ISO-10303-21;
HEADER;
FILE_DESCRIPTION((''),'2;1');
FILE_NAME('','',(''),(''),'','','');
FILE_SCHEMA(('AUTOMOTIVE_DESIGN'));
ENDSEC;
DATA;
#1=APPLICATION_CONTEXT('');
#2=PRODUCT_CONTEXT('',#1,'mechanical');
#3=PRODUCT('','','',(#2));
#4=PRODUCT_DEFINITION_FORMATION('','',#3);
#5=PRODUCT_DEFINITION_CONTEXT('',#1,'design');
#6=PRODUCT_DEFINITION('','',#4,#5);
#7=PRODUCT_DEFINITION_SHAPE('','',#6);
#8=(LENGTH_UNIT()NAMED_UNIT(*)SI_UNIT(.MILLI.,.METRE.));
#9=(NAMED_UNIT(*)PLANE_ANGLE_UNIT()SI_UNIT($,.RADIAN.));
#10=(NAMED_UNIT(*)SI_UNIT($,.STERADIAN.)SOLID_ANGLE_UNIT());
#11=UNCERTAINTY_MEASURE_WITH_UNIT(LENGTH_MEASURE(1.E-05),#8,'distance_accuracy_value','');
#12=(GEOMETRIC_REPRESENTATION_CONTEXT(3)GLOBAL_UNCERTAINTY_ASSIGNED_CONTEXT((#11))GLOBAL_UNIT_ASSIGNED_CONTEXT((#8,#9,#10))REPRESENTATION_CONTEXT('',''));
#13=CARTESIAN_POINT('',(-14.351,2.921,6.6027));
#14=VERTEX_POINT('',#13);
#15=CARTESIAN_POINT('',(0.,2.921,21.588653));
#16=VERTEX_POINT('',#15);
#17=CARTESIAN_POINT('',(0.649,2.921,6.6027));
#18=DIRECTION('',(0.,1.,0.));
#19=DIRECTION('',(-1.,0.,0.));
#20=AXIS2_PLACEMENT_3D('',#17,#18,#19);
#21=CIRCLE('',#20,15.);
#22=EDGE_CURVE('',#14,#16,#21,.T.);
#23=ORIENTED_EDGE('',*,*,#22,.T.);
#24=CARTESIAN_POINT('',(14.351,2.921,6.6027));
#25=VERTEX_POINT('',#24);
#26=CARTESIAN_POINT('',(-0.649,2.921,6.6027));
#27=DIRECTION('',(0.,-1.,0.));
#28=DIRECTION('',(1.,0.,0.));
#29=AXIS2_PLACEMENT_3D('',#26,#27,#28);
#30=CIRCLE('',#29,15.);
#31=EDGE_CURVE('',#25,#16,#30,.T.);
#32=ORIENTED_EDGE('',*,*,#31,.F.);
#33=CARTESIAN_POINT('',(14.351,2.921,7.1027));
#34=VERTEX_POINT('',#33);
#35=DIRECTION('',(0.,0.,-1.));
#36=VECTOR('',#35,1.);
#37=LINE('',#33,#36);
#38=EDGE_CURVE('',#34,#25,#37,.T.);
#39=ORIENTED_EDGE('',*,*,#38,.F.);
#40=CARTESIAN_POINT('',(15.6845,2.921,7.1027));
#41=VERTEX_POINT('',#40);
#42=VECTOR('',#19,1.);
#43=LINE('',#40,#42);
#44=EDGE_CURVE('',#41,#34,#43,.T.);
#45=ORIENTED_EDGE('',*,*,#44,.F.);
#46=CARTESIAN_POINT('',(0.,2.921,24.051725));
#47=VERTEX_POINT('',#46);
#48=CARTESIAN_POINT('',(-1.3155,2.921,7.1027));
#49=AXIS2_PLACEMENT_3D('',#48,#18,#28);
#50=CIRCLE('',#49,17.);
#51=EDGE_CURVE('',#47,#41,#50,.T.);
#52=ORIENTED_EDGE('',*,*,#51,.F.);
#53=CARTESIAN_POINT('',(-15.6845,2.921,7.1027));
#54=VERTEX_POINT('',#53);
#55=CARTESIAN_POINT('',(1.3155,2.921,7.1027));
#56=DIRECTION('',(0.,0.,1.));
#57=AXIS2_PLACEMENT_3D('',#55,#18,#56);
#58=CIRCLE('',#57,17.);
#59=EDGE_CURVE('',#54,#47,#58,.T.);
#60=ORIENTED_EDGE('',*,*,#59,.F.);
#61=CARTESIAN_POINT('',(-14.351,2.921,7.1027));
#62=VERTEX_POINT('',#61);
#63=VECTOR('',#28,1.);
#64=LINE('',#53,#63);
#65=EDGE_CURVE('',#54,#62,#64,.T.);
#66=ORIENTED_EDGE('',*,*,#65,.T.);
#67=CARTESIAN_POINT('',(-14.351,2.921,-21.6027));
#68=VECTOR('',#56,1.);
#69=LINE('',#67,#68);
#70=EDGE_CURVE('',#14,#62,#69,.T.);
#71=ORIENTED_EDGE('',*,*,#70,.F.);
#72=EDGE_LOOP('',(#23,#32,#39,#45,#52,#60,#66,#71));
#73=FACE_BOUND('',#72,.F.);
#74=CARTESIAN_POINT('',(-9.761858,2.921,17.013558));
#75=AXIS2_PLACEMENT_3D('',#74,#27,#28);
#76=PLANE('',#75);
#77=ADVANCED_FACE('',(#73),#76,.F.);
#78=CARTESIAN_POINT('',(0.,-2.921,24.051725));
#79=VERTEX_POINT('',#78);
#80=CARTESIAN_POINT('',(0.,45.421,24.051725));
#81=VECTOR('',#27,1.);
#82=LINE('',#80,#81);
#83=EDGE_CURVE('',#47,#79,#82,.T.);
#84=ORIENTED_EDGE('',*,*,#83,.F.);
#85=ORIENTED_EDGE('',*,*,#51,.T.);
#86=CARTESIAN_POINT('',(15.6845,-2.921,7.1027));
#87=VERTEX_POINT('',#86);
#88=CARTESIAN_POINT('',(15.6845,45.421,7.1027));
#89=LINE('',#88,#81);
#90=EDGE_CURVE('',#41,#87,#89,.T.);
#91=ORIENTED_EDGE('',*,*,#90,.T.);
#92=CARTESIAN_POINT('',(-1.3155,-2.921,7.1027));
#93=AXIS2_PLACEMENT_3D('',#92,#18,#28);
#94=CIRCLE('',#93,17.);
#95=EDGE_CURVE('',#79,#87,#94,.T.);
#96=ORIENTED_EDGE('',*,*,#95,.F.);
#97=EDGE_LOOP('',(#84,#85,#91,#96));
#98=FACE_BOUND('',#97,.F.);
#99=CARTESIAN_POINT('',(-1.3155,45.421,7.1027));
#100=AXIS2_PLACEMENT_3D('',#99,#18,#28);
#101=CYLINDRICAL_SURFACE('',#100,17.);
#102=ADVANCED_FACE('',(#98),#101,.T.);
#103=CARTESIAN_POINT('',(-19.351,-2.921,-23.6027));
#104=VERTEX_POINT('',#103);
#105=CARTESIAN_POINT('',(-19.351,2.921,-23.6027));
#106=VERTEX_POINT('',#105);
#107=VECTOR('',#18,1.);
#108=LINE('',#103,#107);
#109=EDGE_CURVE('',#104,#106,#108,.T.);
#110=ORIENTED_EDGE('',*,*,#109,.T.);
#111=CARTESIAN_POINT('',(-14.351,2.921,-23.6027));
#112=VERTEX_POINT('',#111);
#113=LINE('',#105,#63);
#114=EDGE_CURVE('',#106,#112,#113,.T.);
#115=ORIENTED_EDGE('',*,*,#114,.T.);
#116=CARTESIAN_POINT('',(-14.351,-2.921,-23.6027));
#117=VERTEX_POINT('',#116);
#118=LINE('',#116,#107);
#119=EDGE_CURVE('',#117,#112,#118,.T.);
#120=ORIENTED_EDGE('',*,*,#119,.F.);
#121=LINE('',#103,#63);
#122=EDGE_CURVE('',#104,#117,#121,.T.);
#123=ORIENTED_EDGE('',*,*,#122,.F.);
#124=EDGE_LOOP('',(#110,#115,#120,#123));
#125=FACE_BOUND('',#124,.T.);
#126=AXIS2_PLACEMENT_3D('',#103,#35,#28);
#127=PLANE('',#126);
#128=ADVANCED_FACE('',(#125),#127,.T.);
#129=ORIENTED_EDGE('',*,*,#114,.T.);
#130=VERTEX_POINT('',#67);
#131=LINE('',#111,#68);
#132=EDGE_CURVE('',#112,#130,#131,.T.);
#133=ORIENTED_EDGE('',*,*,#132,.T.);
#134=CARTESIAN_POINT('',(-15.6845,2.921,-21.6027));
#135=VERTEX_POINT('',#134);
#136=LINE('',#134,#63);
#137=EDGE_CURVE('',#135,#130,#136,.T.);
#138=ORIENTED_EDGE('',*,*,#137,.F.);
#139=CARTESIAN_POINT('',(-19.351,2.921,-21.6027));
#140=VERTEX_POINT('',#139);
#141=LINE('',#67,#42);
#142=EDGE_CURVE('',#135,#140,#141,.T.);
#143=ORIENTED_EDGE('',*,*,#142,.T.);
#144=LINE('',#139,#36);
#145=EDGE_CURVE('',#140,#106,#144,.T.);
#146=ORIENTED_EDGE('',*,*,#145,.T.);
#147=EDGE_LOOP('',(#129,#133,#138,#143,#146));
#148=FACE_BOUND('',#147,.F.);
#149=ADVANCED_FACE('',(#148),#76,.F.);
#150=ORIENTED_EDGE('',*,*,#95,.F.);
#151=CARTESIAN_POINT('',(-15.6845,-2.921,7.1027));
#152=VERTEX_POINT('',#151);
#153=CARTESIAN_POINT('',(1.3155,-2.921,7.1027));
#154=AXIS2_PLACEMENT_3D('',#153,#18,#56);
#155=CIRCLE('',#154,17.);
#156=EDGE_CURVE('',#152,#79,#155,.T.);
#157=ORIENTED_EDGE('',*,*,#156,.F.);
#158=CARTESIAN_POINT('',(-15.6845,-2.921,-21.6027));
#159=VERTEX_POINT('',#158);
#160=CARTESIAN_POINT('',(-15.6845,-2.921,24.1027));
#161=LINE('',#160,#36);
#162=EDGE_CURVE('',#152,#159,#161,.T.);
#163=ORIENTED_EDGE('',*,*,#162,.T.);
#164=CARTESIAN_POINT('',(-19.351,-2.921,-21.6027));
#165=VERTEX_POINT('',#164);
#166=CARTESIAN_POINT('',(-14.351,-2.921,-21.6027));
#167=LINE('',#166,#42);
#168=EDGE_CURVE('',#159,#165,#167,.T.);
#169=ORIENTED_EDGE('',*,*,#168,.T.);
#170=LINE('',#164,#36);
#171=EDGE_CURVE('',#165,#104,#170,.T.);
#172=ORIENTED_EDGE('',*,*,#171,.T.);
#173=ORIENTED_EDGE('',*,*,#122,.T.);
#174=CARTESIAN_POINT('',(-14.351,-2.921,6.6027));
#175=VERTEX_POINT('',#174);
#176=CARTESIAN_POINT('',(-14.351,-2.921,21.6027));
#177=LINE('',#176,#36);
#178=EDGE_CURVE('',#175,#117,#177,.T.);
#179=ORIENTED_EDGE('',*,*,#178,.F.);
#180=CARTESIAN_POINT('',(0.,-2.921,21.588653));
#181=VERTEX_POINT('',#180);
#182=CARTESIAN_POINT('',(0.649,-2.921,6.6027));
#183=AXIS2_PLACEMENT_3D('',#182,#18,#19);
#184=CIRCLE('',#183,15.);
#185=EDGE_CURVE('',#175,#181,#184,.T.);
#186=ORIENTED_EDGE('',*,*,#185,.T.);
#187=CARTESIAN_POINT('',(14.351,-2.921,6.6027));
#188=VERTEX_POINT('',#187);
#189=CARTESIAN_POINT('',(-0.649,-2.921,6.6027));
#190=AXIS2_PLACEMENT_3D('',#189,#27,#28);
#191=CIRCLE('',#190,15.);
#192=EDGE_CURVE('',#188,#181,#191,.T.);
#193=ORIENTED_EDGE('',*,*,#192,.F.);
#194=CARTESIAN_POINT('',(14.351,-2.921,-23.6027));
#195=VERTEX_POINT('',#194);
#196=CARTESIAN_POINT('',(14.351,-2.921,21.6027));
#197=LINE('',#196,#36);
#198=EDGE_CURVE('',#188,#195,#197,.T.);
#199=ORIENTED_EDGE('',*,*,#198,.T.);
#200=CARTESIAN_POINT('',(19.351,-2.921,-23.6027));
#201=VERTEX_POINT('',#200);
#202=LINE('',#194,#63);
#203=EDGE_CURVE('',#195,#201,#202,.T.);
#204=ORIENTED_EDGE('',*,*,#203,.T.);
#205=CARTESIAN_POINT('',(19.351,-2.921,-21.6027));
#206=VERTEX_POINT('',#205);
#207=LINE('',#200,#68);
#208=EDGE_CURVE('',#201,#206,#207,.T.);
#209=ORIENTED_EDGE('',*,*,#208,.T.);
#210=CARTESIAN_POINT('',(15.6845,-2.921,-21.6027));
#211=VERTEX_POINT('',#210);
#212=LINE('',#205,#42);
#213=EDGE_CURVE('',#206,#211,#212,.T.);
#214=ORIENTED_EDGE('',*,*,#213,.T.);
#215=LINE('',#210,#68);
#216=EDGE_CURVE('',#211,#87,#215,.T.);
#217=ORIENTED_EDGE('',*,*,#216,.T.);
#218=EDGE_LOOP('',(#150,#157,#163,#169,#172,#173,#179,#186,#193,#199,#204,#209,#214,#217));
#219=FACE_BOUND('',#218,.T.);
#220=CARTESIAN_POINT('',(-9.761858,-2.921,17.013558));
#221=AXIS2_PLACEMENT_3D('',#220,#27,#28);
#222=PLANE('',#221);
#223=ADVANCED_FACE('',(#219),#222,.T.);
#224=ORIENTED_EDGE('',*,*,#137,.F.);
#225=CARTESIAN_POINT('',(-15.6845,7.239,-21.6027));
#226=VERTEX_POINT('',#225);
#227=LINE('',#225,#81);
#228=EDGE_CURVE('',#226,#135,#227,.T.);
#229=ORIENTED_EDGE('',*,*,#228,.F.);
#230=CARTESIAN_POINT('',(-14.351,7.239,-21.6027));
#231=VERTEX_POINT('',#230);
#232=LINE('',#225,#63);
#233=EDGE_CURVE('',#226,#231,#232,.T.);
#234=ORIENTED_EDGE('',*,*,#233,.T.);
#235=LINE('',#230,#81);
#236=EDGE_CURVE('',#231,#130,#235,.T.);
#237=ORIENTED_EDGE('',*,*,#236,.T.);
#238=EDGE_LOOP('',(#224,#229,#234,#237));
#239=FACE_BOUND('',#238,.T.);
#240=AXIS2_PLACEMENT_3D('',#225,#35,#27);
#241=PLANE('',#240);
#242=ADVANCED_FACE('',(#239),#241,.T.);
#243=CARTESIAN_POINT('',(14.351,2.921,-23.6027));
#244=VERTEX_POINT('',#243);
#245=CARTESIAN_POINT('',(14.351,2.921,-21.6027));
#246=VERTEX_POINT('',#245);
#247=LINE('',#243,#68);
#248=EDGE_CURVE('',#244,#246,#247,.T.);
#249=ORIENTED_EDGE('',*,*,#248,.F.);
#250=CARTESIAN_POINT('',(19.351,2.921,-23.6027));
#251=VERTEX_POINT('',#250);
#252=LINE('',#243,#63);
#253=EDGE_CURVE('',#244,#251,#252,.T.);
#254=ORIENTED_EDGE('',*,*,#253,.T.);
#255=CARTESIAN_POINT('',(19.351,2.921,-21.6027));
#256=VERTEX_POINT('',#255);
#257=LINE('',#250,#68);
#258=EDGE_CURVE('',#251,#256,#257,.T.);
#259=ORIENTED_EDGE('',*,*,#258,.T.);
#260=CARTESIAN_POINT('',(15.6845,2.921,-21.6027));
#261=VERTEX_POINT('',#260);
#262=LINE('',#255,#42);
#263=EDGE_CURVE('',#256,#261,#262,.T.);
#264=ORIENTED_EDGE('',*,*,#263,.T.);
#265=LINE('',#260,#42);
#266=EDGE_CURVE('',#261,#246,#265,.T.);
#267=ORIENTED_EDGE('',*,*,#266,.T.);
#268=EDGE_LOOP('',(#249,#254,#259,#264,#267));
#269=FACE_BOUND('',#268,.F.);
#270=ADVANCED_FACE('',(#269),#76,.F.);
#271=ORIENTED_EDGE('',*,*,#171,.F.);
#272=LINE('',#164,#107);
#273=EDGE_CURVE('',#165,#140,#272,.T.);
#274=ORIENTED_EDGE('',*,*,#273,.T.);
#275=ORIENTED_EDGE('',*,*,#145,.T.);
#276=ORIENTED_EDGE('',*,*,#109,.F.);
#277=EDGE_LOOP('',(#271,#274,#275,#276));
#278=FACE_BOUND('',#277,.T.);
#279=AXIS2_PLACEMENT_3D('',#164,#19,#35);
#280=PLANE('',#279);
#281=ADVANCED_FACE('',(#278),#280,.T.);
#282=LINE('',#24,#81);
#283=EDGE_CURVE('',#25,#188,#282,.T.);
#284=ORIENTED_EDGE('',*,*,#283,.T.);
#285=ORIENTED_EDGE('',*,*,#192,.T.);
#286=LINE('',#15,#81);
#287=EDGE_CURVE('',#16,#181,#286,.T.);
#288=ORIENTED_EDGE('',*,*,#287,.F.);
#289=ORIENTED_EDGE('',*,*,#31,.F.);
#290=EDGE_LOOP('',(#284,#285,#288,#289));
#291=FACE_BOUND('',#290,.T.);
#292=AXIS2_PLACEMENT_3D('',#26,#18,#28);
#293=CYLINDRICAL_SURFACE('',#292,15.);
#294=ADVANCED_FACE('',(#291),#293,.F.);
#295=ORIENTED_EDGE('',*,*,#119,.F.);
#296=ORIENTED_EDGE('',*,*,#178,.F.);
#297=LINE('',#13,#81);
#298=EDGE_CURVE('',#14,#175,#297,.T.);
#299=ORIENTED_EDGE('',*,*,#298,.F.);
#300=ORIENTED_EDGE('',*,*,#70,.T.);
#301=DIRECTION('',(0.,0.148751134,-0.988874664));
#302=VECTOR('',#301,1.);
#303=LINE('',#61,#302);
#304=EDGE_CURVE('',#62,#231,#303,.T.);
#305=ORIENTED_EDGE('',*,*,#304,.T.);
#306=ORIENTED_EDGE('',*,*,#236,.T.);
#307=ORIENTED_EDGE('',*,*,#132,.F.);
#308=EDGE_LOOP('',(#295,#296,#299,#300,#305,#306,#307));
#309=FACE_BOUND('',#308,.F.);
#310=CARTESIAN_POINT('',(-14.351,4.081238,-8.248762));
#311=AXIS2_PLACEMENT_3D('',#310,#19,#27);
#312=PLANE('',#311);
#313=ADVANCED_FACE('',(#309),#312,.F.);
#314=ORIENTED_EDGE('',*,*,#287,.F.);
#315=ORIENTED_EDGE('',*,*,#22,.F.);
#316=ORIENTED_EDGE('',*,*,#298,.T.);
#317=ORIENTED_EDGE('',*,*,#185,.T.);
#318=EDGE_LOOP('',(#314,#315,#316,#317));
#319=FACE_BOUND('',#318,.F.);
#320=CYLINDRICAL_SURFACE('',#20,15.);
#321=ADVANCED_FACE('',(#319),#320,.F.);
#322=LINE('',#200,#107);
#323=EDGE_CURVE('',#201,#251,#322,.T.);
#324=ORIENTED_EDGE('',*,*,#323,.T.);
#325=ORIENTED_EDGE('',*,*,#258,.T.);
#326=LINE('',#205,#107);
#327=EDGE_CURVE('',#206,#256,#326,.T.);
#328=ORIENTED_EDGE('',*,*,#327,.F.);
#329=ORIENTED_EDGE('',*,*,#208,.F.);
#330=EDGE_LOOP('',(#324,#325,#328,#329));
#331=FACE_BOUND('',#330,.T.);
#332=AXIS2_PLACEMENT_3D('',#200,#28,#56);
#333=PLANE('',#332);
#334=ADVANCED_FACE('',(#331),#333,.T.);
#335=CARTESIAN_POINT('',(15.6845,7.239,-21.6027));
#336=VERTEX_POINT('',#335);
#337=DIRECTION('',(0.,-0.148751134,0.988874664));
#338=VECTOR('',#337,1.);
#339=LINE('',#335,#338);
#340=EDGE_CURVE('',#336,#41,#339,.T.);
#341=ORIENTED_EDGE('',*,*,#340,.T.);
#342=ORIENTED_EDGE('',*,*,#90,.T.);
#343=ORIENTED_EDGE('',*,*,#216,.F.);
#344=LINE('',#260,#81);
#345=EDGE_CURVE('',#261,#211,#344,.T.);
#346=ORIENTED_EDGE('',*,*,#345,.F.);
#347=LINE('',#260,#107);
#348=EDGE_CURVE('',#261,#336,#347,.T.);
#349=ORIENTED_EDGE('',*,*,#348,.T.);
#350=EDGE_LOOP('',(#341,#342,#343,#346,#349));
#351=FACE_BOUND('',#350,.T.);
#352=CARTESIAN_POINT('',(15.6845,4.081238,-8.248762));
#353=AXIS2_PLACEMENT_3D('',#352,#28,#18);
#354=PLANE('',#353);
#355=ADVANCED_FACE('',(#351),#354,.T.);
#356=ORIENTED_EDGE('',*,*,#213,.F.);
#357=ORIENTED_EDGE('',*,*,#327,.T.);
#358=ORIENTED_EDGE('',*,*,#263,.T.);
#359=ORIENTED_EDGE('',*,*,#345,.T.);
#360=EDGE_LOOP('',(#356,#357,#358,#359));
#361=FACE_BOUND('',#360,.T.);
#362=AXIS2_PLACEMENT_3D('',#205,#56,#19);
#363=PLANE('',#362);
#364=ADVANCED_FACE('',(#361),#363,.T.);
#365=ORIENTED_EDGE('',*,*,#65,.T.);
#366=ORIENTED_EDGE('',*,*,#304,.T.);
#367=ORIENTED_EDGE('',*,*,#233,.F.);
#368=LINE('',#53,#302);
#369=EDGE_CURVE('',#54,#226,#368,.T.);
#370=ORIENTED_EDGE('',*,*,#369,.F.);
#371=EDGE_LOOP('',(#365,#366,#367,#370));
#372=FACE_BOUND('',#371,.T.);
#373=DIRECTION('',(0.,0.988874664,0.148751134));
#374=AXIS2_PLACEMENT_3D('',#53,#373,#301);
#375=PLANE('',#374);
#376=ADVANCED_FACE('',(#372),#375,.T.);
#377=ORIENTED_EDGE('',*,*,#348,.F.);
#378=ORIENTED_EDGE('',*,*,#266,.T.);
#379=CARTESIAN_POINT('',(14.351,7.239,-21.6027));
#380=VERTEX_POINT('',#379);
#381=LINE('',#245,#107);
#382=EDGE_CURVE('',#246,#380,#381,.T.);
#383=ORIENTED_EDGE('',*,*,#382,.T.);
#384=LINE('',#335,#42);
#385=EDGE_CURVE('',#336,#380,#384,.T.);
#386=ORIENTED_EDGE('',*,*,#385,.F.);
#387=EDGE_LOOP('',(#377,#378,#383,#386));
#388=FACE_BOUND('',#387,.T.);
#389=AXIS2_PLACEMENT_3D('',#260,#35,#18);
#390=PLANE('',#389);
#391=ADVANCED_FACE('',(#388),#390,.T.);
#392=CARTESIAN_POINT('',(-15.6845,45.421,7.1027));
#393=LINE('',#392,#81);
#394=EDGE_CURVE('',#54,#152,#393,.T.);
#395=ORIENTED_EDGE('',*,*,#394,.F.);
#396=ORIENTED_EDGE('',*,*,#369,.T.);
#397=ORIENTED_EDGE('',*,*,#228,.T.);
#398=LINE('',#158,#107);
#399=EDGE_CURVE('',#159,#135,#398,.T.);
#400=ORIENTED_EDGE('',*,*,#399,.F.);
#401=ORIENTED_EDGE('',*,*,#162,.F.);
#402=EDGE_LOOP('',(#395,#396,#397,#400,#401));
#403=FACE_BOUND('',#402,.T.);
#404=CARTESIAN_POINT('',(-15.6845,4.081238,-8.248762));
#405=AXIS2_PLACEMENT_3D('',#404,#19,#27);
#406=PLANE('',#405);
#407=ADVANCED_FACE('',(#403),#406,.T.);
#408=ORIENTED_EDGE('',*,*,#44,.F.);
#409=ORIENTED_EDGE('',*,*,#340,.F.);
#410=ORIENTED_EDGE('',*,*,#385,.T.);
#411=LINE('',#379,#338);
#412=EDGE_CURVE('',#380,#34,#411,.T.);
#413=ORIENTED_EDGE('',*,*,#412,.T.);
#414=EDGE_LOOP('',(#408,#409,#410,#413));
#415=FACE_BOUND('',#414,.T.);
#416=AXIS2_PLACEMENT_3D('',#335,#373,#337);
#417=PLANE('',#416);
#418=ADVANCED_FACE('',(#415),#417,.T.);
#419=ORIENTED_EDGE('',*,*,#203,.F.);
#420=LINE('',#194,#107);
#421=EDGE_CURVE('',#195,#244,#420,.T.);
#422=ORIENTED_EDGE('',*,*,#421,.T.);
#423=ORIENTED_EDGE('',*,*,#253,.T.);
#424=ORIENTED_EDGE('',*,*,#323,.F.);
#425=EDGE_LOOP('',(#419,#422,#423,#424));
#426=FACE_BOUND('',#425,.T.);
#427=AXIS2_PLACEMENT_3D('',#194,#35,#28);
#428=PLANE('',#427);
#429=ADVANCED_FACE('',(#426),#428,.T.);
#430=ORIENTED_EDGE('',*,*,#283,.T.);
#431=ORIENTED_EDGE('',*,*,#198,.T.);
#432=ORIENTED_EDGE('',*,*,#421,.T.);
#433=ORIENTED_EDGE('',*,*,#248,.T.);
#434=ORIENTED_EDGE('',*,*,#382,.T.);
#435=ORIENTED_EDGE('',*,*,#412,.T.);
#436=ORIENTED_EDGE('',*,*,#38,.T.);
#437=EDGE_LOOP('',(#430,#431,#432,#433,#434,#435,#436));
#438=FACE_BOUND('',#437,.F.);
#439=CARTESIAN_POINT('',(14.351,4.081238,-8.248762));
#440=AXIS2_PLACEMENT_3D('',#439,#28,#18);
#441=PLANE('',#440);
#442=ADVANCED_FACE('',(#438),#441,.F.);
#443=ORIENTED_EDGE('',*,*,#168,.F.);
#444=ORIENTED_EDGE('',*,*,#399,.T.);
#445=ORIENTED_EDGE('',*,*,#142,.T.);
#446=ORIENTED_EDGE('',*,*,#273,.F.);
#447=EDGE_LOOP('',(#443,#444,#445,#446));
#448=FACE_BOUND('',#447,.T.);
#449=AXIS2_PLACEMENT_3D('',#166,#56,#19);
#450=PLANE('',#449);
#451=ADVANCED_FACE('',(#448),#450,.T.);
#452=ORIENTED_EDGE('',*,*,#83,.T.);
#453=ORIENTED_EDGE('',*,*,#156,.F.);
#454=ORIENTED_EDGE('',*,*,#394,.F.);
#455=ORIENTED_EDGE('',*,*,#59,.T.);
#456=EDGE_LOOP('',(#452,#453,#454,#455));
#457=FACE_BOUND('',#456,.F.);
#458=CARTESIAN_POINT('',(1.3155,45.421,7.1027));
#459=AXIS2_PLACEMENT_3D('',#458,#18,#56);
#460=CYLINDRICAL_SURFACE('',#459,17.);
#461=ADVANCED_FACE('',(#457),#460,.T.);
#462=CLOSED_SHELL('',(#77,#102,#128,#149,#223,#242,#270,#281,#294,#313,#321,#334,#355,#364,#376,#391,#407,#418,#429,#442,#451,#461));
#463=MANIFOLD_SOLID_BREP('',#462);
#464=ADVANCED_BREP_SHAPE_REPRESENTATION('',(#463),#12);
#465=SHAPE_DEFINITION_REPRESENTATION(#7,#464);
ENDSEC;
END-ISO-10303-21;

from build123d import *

# Parameters (mm, degrees)
F1_DEPTH    = 2.921
F3_DEPTH    = 5.842
F4_T1_DEPTH = 5.842
F5_T1_DEPTH = 90.842
F7_DEPTH    = 1.3335
F9_DEPTH    = 1.3335


# Not quite as in the source:
# - a fillet or chamfer that OpenCascade refuses, or shapes differently, is made with other operations: its cross-section is extruded or revolved along the edge and cut away or added


with BuildPart() as f1:
    # F0 (on Front) → F1 (new body, symmetric)
    with BuildSketch(Plane.XZ):
        Polygon((-14.351, -21.6027), (-14.351, 21.6027), (14.351, 21.6027), (14.351, -21.6027), (15.6845, -21.6027), (15.6845, 24.1027), (-15.6845, 24.1027), (-15.6845, -21.6027), align=None)
    extrude(amount=F1_DEPTH, both=True)

    # F2 (on face) → F3 (join, through all)
    with BuildSketch(Plane.XZ.offset(2.921)):
        Polygon((-14.351, -23.6027), (-14.351, -21.6027), (-15.6845, -21.6027), (-19.351, -21.6027), (-19.351, -23.6027), align=None)
        Polygon((15.6845, -21.6027), (14.351, -21.6027), (14.351, -23.6027), (19.351, -23.6027), (19.351, -21.6027), align=None)
    extrude(amount=-F3_DEPTH)

    # F4: fillet of radius 15 on 2 edges, made by hand

    # F4_s2 → F4_t1 (join)
    with BuildSketch(Plane.XZ.offset(-2.921)):
        with BuildLine():
            ThreePointArc((-14.351, 6.6027), (-9.9576017178, 17.2093017178), (0.649, 21.6027))
            Line((0.649, 21.6027), (-14.351, 21.6027))
            Line((-14.351, 21.6027), (-14.351, 6.6027))
        make_face()
        with BuildLine():
            ThreePointArc((14.351, 6.6027), (9.9576017178, 17.2093017178), (-0.649, 21.6027))
            Line((-0.649, 21.6027), (14.351, 21.6027))
            Line((14.351, 21.6027), (14.351, 6.6027))
        make_face()
    extrude(amount=F4_T1_DEPTH)

    # F5: fillet of radius 17 on 2 edges, made by hand

    # F5_s2 → F5_t1 (cut)
    with BuildSketch(Plane.XZ.offset(-45.421)):
        with BuildLine():
            ThreePointArc((1.3155, 24.1027), (-10.7053152802, 19.1235152802), (-15.6845, 7.1027))
            Line((-15.6845, 7.1027), (-15.6845, 24.1027))
            Line((-15.6845, 24.1027), (1.3155, 24.1027))
        make_face()
        with BuildLine():
            ThreePointArc((15.6845, 7.1027), (10.7053152802, 19.1235152802), (-1.3155, 24.1027))
            Line((-1.3155, 24.1027), (15.6845, 24.1027))
            Line((15.6845, 24.1027), (15.6845, 7.1027))
        make_face()
    extrude(amount=F5_T1_DEPTH, mode=Mode.SUBTRACT)

    # F6 (on face) → F7 (join, through all)
    with BuildSketch(Plane(origin=(-15.6845, 0, 0), x_dir=(0, -1, 0), z_dir=(-1, 0, 0))):
        Polygon((-2.921, -21.6027), (-2.921, 7.1027), (-7.239, -21.6027), align=None)
    extrude(amount=-F7_DEPTH)

    # F8 (on face) → F9 (join, through all)
    with BuildSketch(Plane.YZ.offset(15.6845)):
        Polygon((2.921, 6.6027), (2.921, -21.6027), (7.239, -21.6027), (2.921, 7.1027), align=None)
    extrude(amount=-F9_DEPTH)


solid = f1.part
